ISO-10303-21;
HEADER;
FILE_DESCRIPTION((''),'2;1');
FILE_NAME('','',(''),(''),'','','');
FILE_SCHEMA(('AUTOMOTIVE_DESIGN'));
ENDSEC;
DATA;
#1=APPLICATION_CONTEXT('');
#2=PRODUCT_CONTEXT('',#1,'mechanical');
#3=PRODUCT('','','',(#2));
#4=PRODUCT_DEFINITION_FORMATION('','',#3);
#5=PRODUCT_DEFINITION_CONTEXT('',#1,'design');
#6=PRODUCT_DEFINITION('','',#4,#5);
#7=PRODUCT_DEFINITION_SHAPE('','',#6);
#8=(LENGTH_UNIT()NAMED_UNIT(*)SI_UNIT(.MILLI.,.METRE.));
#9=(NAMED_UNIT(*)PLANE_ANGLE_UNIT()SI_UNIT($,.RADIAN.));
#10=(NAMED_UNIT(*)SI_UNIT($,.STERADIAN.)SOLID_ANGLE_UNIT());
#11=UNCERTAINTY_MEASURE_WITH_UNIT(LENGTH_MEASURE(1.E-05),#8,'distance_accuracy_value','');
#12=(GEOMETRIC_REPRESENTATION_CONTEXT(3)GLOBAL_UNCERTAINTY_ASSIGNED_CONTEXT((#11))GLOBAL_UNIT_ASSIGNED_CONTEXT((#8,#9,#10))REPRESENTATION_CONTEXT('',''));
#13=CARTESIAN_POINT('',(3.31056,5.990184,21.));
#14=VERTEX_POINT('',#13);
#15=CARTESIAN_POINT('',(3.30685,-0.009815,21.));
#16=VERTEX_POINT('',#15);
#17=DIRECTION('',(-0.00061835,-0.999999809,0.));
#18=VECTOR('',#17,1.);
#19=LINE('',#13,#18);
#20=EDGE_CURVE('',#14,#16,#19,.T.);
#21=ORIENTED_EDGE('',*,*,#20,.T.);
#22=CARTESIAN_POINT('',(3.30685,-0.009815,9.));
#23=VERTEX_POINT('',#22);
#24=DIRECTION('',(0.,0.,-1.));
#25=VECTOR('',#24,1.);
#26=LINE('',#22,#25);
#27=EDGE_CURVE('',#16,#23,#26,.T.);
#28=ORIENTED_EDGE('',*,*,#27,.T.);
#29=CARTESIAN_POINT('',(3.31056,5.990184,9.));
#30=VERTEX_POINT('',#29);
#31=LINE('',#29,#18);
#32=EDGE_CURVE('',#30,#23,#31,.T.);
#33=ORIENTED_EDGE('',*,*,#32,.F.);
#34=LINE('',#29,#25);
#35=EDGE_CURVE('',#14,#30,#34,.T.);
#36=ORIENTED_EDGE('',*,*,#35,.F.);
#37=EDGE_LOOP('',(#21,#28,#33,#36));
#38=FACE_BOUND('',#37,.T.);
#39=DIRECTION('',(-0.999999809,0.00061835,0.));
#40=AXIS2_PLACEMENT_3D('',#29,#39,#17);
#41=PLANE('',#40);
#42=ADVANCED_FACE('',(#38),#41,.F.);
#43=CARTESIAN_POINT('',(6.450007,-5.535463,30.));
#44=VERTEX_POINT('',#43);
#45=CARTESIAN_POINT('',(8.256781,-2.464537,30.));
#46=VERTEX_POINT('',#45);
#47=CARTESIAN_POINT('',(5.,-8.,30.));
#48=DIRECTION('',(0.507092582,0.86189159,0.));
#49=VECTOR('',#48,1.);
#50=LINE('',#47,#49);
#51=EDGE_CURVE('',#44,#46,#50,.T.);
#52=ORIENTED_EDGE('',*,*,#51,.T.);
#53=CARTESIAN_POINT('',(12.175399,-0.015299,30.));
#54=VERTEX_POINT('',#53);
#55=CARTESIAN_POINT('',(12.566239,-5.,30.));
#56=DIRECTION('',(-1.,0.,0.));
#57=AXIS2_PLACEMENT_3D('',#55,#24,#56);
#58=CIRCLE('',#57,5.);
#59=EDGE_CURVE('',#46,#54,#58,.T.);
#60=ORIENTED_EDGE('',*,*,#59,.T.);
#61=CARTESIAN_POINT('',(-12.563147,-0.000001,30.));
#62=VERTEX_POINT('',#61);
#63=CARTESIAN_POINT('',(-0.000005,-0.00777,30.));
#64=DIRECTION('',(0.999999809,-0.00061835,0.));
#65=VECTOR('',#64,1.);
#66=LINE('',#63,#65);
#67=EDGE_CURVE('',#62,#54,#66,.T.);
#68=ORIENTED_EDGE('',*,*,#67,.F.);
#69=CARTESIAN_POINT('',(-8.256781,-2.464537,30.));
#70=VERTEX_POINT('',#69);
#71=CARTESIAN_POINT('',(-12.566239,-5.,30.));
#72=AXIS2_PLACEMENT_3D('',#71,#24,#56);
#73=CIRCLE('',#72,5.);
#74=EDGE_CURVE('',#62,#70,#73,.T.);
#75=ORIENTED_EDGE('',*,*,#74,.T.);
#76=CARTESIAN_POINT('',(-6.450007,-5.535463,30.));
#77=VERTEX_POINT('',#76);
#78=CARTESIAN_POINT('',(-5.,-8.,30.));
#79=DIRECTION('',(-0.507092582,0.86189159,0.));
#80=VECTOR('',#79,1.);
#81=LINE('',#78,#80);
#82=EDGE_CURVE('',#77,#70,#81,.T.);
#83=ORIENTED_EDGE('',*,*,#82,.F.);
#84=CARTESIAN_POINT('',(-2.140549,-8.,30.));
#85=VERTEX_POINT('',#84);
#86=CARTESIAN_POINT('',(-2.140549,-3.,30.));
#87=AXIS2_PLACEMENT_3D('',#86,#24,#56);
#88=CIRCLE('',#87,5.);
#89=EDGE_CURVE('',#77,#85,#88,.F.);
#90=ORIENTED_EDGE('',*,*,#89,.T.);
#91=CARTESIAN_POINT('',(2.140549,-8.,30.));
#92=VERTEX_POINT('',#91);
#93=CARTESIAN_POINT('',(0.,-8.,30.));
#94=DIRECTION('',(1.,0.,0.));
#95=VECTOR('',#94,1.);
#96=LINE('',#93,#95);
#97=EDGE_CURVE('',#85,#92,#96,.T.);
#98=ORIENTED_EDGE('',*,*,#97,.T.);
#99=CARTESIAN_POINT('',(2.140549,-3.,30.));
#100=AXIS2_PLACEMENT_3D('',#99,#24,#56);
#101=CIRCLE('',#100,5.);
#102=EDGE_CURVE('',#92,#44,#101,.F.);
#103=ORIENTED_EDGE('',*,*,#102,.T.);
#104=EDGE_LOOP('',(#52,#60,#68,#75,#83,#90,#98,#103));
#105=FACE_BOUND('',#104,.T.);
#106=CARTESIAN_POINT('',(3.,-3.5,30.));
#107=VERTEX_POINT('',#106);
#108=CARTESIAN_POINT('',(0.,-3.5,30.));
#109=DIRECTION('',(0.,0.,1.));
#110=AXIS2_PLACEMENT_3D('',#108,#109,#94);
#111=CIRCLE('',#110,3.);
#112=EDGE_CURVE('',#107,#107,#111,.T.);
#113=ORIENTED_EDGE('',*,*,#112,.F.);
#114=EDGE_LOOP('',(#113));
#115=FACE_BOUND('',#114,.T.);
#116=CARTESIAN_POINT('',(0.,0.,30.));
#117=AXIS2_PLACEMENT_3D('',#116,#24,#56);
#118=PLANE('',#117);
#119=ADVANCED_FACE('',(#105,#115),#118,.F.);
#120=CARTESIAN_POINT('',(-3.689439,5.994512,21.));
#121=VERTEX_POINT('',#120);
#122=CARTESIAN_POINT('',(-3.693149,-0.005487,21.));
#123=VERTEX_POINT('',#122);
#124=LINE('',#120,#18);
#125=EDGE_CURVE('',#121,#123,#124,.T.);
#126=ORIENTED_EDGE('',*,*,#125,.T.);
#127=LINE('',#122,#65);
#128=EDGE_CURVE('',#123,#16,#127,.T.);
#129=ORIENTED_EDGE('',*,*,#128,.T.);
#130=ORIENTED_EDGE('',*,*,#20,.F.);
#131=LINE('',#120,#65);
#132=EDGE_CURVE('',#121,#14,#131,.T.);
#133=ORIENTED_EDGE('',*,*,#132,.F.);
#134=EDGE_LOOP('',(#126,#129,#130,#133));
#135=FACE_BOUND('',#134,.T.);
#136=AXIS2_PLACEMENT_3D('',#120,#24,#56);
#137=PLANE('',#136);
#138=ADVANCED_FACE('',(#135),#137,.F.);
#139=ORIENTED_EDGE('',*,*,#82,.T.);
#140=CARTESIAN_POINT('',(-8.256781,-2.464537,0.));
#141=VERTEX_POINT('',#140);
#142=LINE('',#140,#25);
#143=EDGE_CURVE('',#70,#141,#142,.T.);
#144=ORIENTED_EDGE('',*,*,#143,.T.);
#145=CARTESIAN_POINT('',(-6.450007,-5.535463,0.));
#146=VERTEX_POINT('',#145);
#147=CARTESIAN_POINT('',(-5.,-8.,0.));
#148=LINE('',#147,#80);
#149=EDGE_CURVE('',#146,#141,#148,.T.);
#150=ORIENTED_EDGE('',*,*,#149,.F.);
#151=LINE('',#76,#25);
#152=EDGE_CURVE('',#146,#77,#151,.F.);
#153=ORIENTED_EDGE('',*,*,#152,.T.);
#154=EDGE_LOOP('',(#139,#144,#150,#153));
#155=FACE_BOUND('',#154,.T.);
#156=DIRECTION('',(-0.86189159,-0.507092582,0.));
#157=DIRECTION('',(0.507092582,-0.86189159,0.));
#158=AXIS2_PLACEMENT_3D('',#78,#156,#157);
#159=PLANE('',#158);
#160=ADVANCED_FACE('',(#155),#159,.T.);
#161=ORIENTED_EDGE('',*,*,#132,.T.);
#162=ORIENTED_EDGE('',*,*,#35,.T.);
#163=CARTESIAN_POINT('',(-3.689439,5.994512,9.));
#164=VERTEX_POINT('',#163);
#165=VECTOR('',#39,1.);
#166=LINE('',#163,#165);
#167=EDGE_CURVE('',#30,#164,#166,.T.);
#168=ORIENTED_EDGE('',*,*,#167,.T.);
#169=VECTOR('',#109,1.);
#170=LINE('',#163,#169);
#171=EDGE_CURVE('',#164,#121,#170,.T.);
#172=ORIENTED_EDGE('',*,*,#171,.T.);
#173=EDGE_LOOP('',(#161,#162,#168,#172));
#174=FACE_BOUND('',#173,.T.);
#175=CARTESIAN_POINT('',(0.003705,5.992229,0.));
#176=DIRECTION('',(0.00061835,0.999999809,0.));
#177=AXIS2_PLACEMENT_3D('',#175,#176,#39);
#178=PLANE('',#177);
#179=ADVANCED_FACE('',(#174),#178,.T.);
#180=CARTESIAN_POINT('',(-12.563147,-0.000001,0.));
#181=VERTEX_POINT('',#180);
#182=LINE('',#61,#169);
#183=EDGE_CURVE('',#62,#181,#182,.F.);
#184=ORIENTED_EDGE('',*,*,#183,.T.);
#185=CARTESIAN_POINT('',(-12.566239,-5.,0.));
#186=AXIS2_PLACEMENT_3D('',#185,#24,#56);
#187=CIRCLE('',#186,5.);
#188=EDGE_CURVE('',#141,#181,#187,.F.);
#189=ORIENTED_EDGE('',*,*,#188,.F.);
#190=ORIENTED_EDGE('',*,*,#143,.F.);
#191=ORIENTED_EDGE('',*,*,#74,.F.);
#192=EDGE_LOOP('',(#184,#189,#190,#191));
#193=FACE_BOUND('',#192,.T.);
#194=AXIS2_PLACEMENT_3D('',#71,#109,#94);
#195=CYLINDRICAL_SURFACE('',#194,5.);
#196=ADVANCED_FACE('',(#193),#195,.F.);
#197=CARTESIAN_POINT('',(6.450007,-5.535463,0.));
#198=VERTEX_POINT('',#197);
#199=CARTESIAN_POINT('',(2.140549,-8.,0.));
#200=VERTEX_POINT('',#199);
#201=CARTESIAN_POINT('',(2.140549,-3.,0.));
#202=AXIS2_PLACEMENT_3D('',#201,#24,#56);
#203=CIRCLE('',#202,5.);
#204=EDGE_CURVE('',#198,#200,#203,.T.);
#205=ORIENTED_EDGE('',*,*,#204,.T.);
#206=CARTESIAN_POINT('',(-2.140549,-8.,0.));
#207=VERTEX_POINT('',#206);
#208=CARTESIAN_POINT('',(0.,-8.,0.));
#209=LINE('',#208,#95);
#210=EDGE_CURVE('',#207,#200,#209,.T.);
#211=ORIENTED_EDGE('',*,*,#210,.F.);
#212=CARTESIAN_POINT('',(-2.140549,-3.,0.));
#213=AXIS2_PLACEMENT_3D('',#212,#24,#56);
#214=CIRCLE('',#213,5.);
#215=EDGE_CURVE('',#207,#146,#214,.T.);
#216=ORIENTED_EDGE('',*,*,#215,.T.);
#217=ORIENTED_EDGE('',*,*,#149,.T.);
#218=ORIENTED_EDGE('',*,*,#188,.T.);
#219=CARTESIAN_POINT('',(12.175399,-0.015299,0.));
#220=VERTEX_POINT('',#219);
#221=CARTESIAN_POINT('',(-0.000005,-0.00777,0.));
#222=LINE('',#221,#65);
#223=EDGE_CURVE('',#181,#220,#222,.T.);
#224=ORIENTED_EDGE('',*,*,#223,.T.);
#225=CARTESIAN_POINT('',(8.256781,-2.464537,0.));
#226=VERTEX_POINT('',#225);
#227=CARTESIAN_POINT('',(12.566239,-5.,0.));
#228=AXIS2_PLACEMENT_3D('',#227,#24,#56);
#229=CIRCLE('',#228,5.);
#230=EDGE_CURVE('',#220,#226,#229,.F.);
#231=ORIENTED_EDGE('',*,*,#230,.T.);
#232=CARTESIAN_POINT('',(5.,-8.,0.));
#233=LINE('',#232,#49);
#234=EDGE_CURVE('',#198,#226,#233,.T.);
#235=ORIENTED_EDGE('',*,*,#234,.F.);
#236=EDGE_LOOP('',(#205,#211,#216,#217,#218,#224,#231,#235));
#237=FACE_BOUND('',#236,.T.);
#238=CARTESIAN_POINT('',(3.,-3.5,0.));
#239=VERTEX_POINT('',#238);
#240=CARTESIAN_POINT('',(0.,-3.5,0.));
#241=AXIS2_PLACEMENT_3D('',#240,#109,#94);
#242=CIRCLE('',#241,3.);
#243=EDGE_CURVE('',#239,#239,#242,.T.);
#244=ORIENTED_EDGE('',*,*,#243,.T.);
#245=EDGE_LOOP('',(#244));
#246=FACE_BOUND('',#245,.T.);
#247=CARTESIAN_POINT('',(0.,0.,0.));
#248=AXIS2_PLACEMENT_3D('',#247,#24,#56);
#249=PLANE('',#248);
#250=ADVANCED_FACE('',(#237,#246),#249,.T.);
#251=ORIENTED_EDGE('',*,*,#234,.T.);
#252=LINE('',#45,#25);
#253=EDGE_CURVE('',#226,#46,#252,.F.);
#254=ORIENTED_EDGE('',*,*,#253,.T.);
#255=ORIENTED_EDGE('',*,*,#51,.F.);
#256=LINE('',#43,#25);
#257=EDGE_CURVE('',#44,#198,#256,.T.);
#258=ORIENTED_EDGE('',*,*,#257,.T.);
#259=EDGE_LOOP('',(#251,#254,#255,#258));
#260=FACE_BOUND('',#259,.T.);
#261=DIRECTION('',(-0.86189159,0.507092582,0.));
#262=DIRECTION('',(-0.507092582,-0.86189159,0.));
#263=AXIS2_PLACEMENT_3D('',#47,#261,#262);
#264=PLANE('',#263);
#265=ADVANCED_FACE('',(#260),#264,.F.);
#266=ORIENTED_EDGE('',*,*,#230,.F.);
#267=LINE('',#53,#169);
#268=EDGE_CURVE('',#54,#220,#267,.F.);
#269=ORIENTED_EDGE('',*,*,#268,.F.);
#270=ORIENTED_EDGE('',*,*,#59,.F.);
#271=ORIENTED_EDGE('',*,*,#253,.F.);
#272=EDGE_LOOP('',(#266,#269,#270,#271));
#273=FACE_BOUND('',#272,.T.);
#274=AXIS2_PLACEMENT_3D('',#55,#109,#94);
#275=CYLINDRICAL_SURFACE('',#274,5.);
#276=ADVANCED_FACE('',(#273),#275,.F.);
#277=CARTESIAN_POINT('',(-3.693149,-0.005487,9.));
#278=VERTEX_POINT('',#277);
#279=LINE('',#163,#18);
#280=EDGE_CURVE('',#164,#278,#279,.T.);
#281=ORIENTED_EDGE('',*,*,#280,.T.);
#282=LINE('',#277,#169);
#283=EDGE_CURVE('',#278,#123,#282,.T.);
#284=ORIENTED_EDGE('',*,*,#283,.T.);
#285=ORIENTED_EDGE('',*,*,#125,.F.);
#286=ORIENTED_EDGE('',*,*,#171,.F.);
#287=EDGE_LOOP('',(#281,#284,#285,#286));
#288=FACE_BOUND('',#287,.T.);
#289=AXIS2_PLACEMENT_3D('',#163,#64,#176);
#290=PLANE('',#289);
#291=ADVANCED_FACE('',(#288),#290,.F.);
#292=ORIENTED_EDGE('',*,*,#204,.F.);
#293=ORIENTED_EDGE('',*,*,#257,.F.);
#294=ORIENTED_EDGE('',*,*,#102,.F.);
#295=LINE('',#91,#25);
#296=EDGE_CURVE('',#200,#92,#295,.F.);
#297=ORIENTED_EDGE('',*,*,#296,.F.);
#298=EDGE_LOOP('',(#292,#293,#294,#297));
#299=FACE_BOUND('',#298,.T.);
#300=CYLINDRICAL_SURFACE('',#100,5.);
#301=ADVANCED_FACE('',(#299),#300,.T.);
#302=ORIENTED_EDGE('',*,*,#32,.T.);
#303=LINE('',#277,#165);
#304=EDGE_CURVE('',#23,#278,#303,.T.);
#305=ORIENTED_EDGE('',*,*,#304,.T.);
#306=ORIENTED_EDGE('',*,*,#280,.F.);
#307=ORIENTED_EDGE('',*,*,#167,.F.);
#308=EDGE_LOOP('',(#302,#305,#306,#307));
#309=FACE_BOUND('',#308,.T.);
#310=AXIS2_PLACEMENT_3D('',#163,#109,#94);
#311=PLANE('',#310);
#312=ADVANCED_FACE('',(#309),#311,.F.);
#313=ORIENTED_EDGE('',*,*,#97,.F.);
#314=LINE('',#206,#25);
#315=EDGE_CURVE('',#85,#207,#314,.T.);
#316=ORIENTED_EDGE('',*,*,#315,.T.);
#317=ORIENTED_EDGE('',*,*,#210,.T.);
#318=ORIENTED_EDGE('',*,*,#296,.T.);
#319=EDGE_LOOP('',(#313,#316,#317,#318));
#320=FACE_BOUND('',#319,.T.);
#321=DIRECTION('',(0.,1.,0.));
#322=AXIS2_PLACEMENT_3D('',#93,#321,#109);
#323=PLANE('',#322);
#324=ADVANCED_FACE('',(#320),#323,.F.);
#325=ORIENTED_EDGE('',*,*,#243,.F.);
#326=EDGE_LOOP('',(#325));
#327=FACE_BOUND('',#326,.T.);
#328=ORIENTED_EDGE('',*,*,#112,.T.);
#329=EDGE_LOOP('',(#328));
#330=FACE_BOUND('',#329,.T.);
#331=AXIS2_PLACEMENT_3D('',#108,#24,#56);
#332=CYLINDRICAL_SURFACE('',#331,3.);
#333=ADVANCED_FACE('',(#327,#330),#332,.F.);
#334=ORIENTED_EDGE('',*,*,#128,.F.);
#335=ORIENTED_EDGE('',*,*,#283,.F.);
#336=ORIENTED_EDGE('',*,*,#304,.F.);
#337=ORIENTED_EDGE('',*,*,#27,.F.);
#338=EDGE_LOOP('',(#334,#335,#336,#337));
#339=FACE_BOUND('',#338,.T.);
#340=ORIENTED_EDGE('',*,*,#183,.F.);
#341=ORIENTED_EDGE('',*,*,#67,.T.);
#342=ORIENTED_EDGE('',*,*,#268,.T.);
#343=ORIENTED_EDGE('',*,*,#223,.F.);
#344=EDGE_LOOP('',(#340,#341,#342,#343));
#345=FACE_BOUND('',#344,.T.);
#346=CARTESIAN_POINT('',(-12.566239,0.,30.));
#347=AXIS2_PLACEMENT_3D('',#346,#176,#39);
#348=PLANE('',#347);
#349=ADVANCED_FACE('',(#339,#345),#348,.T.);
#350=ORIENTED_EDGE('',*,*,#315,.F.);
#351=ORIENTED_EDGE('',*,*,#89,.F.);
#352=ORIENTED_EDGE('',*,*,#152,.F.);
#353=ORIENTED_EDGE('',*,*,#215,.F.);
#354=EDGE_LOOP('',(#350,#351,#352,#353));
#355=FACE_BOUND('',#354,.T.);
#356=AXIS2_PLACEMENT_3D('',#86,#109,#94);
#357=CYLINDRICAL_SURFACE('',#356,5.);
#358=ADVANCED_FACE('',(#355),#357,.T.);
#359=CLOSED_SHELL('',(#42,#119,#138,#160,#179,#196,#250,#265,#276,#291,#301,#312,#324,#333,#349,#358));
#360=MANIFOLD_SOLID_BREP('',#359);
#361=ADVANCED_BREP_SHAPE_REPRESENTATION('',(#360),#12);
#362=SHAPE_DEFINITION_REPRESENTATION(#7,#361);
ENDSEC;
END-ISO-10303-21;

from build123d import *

# Parameters (mm, degrees)
STOCK_AUGET_1_OUTLINE_R = 3
STOCK_AUGET_1_DEPTH     = 30
ESQUISSE1_W             = 7
ESQUISSE1_H             = 12
BOSS_EXTRU_1_DEPTH      = 6


# Read off the part's stored shape, not the designer's step: Stock-auget-1
with BuildPart() as part:
    # Stock-auget-1 outline → Stock-auget-1 (new body)
    with BuildSketch(Plane.XY):
        with BuildLine():
            ThreePointArc((8.256781031, -2.464537089), (9.916165038, -0.760058008), (12.17539903, -0.015298993))
            Line((12.17539903, -0.015298993), (-12.563147232, -9.56e-07))
            ThreePointArc((-12.563147232, -9.56e-07), (-10.082691958, -0.660415437), (-8.256781031, -2.464537089))
            Line((-8.256781031, -2.464537089), (-6.450006579, -5.535462911))
            ThreePointArc((-6.450006579, -5.535462911), (-4.622753843, -7.340352207), (-2.140548629, -8))
            Line((-2.140548629, -8), (2.140548629, -8))
            ThreePointArc((2.140548629, -8), (4.622753843, -7.340352207), (6.450006579, -5.535462911))
            Line((6.450006579, -5.535462911), (8.256781031, -2.464537089))
        make_face()
        with Locations((0, -3.5)):
            Circle(STOCK_AUGET_1_OUTLINE_R, mode=Mode.SUBTRACT)
    extrude(amount=STOCK_AUGET_1_DEPTH)

    # Esquisse1 → Boss.-Extru.1 (add)
    with BuildSketch(Plane(origin=(-4.805e-06, -0.007770331, 0), x_dir=(0.9999998088216733, -0.0006183499145584942, 0), z_dir=(0.0006183499145584943, 0.9999998088216734, 0))):
        with Locations((-0.193144829, -15)):
            Rectangle(ESQUISSE1_W, ESQUISSE1_H)
    extrude(amount=BOSS_EXTRU_1_DEPTH)


solid = part.part
